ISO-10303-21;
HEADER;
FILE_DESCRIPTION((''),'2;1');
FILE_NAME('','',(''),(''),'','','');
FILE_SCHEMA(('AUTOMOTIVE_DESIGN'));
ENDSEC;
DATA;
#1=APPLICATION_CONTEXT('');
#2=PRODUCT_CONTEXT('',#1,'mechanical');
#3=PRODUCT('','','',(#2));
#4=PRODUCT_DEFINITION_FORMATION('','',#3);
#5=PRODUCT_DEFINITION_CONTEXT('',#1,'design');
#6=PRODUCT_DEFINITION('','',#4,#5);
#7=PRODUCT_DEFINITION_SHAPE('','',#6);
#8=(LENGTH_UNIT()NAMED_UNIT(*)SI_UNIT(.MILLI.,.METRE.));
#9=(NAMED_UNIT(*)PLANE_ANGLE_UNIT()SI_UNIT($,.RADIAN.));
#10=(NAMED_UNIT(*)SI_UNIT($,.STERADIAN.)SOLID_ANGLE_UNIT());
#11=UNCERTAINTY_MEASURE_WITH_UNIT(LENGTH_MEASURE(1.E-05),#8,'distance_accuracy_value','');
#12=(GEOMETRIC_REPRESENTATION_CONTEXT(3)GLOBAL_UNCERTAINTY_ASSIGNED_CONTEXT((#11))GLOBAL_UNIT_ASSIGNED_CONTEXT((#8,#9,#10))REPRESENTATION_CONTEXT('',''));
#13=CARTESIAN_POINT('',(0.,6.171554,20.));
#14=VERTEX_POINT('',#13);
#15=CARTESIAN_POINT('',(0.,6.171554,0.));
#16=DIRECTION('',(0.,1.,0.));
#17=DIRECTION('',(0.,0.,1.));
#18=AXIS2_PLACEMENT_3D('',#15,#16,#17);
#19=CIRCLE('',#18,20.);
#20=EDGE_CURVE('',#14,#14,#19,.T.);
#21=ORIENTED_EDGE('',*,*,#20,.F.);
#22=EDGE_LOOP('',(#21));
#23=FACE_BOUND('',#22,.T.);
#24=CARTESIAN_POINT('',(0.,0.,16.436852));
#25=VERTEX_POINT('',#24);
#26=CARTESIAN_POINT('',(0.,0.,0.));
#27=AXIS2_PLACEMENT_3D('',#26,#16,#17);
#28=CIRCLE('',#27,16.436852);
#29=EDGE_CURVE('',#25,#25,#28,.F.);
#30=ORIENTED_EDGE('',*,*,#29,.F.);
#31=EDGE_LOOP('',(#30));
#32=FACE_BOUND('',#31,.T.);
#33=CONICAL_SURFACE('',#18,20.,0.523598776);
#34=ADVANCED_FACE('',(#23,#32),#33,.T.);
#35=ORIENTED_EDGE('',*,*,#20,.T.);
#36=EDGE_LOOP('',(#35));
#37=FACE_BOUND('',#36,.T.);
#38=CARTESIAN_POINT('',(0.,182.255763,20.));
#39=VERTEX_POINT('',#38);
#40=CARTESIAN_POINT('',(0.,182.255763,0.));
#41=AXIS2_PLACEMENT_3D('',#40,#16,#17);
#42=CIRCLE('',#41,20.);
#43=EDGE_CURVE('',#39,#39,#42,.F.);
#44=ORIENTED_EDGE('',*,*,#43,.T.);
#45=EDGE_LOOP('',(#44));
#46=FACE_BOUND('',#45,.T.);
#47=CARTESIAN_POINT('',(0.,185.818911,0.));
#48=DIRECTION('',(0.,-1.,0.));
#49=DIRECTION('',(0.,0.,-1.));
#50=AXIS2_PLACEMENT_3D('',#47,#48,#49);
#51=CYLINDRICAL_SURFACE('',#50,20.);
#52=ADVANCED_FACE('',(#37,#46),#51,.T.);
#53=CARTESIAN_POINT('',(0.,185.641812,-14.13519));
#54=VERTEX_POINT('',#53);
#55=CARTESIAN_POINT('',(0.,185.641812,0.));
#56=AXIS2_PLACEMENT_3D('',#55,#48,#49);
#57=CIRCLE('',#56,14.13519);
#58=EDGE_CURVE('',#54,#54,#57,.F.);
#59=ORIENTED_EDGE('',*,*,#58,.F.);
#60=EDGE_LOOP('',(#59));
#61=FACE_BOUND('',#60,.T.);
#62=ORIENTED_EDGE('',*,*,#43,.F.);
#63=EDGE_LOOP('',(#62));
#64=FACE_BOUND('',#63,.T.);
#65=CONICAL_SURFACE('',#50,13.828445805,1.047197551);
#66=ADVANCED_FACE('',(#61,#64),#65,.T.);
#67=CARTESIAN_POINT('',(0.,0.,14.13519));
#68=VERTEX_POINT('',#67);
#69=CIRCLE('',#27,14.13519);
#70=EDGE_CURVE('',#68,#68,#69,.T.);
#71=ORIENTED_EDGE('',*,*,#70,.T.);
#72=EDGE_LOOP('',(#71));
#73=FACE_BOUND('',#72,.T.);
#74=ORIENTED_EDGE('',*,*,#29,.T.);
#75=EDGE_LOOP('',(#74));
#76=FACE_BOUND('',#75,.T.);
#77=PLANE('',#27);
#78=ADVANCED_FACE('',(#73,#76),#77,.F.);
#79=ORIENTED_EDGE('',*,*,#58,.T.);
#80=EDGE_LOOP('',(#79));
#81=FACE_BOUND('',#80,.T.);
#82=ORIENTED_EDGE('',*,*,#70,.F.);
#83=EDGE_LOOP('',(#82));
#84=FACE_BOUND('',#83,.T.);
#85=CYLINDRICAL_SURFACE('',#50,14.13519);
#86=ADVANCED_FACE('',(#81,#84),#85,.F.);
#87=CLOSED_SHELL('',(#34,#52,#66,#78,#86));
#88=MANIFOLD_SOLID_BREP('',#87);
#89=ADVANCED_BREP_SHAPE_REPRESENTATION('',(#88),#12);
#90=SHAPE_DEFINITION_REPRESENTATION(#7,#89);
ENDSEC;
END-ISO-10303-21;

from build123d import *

# Parameters (mm, degrees)
SKETCH1_R           = 20
BOSS_EXTRUDE1_DEPTH = 185.818911
SKETCH2_R           = 14.135189885
CUT_EXTRUDE1_DEPTH  = 188.959218144
CHAMFER1_SIZE       = 3.563148
CHAMFER1_SIZE_2     = 6.171554


with BuildPart() as part:
    # Sketch1 → Boss-Extrude1 (new body)
    with BuildSketch(Plane(origin=(0, 0, 0), x_dir=(1, 0, 0), z_dir=(0, 1, 0))):
        with Locations(Location((0, 0, 0), (0, 0, 270))):
            Circle(SKETCH1_R)
    extrude(amount=BOSS_EXTRUDE1_DEPTH)

    # Sketch2 → Cut-Extrude1 (cut, through all)
    with BuildSketch(Plane(origin=(0, 0, 0), x_dir=(1, 0, 0), z_dir=(0, 1, 0))):
        with Locations(Location((0, 0, 0), (0, 0, 270))):
            Circle(SKETCH2_R)
    extrude(amount=CUT_EXTRUDE1_DEPTH, mode=Mode.SUBTRACT)

    # Chamfer1
    # the kernel refuses this chamfer: 6.171554, 3.563148 mm, written as the material it takes off along each edge
    with BuildSketch(Plane(origin=(0, 185.818911, 0), x_dir=(0, 0, 1), z_dir=(-1, 0, 0))) as chamfer1_piece_1:
        Polygon((20, -CHAMFER1_SIZE), (20 - CHAMFER1_SIZE_2, 0), (20, 0), align=None)
    revolve(axis=Axis((0, 185.818911, 0), (0, 1, 0)), mode=Mode.SUBTRACT)
    with BuildSketch(Plane(origin=(0, 0, 0), x_dir=(0, 0, 1), z_dir=(-1, 0, 0))) as chamfer1_piece_2:
        Polygon((20, CHAMFER1_SIZE_2), (20 - CHAMFER1_SIZE, 0), (20, 0), align=None)
    revolve(axis=Axis((0, 0, 0), (0, 1, 0)), mode=Mode.SUBTRACT)


solid = part.part
